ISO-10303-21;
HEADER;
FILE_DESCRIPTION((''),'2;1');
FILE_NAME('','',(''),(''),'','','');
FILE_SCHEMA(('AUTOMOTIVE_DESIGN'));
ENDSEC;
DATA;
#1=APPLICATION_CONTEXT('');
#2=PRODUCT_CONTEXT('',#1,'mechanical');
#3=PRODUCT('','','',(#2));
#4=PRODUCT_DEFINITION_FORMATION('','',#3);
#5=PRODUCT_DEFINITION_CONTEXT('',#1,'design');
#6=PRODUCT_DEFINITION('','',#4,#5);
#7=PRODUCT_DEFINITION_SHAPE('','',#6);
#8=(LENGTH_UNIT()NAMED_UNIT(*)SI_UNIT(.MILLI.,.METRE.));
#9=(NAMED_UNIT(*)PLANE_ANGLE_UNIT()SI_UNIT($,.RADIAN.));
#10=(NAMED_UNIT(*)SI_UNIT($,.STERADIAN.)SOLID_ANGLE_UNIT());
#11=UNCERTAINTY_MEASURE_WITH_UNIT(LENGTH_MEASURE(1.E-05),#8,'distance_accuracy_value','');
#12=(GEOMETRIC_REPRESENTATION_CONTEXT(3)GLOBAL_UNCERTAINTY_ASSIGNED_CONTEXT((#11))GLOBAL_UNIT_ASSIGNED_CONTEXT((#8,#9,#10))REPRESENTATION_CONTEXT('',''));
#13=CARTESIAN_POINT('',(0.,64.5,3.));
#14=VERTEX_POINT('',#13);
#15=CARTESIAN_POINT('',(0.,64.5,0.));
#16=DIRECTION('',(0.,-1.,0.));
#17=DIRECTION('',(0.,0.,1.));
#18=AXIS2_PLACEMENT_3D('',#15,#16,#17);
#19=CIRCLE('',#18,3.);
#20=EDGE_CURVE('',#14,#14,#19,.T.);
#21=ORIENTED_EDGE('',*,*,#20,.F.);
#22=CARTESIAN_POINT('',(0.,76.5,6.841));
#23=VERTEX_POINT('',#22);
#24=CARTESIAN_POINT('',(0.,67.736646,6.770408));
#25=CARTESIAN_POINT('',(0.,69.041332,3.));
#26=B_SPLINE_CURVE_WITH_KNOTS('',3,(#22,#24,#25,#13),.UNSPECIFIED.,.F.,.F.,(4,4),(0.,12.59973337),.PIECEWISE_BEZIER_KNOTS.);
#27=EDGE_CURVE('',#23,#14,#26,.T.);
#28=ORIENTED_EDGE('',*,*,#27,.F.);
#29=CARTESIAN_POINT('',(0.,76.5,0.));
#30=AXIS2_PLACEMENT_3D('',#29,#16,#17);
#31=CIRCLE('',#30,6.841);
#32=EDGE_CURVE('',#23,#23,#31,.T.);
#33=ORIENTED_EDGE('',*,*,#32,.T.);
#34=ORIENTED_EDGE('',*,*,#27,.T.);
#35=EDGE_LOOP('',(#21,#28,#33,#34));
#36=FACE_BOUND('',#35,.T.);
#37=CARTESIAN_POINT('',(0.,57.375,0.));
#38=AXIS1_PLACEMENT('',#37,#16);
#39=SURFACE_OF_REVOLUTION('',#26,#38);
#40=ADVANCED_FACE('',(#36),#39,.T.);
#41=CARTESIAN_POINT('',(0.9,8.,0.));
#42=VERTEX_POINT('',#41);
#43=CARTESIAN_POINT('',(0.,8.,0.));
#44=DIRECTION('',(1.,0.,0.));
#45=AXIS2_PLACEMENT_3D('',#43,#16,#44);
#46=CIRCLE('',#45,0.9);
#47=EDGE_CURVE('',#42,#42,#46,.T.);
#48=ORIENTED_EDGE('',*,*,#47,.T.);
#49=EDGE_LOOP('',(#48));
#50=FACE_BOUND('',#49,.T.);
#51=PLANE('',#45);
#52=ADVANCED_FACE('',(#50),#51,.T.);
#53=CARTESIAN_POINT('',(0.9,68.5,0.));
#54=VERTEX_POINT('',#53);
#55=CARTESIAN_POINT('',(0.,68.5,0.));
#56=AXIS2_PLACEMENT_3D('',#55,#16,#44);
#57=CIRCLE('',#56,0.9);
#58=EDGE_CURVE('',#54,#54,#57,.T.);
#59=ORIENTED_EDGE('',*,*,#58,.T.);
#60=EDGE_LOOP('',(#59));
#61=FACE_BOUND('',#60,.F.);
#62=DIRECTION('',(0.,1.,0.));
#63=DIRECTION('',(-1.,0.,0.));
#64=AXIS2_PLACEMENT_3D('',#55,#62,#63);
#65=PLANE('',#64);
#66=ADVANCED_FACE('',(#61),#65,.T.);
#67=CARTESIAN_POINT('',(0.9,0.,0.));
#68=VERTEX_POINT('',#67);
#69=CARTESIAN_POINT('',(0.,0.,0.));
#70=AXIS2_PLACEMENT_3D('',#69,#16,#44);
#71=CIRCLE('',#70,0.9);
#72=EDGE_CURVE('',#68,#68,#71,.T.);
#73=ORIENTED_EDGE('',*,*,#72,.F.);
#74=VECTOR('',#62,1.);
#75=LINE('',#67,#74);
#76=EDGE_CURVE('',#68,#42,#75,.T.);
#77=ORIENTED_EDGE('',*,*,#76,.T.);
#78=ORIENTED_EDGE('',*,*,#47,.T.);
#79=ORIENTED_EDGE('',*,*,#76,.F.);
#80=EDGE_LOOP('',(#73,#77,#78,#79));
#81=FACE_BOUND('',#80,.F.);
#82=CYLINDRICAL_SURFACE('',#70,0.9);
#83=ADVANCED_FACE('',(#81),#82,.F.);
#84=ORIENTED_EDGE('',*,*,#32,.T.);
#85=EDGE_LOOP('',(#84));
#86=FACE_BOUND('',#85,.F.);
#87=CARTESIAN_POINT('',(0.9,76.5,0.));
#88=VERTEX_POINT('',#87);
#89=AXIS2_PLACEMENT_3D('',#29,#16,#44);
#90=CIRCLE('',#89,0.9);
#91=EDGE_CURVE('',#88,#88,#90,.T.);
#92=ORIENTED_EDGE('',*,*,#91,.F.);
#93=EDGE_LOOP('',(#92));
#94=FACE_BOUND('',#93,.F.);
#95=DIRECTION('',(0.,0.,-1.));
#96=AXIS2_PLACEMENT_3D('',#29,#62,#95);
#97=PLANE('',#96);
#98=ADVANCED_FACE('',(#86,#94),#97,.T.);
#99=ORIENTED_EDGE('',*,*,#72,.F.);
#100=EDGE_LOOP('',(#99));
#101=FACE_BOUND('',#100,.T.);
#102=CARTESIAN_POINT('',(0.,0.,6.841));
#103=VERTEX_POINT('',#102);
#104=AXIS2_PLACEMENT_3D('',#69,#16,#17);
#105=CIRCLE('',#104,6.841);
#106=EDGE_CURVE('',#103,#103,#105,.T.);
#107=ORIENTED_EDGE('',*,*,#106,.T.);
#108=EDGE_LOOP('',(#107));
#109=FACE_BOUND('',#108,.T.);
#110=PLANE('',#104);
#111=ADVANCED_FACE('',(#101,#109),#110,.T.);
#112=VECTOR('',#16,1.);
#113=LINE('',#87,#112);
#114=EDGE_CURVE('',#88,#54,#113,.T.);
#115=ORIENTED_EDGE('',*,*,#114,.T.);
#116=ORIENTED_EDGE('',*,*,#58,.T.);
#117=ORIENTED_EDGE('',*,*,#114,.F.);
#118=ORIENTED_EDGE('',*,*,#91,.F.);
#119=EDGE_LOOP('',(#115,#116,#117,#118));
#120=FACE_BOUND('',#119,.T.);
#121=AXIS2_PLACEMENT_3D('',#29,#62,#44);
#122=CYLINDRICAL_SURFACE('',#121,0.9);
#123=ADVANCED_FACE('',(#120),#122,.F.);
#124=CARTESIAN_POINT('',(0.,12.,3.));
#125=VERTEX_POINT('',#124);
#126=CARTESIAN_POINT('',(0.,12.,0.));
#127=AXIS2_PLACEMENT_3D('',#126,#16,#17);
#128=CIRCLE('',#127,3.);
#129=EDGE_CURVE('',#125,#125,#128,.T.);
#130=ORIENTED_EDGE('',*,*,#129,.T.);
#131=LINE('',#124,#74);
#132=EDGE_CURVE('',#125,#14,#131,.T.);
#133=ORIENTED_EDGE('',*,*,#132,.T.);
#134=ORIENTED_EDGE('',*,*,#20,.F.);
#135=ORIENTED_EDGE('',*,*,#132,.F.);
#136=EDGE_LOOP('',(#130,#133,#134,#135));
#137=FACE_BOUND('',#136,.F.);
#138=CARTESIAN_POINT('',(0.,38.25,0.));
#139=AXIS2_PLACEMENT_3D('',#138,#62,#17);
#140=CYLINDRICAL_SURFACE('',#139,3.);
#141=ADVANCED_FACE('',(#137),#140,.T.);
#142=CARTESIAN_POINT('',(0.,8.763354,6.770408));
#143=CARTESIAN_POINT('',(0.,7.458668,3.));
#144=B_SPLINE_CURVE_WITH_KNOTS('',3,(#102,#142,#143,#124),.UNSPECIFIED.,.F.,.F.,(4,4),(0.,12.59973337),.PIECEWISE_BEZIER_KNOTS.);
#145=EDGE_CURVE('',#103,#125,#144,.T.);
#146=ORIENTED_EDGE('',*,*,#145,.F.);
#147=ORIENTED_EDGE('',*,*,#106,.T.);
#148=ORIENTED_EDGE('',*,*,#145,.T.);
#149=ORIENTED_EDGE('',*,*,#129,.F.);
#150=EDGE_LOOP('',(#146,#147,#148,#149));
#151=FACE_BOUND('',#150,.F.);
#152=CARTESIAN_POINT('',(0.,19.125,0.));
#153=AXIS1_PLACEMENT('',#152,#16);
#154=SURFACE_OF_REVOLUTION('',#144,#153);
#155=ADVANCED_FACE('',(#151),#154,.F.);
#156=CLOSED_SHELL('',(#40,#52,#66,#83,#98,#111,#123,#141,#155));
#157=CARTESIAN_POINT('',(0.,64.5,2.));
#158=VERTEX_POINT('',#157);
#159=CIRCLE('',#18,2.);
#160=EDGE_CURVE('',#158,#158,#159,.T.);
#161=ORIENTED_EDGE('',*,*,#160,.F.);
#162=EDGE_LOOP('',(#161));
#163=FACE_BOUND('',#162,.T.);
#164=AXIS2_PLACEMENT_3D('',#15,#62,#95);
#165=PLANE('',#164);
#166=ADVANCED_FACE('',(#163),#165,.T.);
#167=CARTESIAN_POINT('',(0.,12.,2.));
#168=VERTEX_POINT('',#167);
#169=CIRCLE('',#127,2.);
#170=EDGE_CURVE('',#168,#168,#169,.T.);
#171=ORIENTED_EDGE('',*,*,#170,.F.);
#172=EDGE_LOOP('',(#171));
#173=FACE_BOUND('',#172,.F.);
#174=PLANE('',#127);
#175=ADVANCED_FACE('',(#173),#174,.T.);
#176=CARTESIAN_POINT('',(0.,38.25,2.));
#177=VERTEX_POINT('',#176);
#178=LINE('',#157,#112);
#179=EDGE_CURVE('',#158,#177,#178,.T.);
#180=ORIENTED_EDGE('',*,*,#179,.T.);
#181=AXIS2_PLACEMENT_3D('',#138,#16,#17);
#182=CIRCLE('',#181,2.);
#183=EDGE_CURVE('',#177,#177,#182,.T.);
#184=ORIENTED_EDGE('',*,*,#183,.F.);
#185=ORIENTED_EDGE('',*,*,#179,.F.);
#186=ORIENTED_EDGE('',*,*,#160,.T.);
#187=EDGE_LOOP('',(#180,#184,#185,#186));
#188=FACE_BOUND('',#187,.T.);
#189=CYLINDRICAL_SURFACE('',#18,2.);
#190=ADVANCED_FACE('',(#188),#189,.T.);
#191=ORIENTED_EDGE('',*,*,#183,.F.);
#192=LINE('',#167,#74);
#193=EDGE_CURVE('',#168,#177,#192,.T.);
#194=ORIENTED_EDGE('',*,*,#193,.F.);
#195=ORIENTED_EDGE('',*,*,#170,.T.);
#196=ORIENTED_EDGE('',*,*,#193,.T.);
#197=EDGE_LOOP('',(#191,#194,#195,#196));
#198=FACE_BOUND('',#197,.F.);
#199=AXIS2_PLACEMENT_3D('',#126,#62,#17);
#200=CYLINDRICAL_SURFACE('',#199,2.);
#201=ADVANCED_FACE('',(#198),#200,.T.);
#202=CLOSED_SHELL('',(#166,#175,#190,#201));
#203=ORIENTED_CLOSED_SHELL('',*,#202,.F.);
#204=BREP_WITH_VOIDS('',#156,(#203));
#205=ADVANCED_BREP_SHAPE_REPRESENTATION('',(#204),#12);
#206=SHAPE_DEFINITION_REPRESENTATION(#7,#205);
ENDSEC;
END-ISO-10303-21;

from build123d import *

# Parameters (mm, degrees)
F2_R     = 0.9
F3_DEPTH = 8


with BuildPart() as f1:
    # F0 (on Right) → F1 (revolve)
    with BuildSketch(Plane.YZ):
        with BuildLine():
            Line((0, 5.841069423), (0, 0))
            Line((0, 0), (12, 0))
            Line((12, 0), (12, 2))
            add(Edge.make_bspline(
                [(0, 5.841069423), (0.3497183744, 5.8426503833), (1.3005439266, 5.8382623264), (2.8964802159, 5.7455783673), (4.5870476785, 5.3782777015), (5.9874523646, 4.7970685822), (7.0213600835, 4.1135251272), (7.9242720145, 3.365273981), (8.9405324509, 2.6085376072), (10.1254552113, 2.0890201928), (11.1979079035, 1.9926198646), (11.7889157433, 1.9938020422), (12, 2)],
                knots=[0.0080728178, 0.0080728178, 0.0080728178, 0.0080728178, 1.0595032706, 2.8567052188, 4.7969778976, 6.2186626182, 7.3787538627, 8.5000771421, 9.7368937359, 11.1749138539, 12.3063283312, 12.9431817135, 12.9431817135, 12.9431817135, 12.9431817135], degree=3))
        make_face()
        with BuildLine():
            Line((0, 6.841), (0, 5.841069423))
            add(Edge.make_bspline(
                [(0, 5.841069423), (0.3497183744, 5.8426503833), (1.3005439266, 5.8382623264), (2.8964802159, 5.7455783673), (4.5870476785, 5.3782777015), (5.9874523646, 4.7970685822), (7.0213600835, 4.1135251272), (7.9242720145, 3.365273981), (8.9405324509, 2.6085376072), (10.1254552113, 2.0890201928), (11.1979079035, 1.9926198646), (11.7889157433, 1.9938020422), (12, 2)],
                knots=[0.0080728178, 0.0080728178, 0.0080728178, 0.0080728178, 1.0595032706, 2.8567052188, 4.7969778976, 6.2186626182, 7.3787538627, 8.5000771421, 9.7368937359, 11.1749138539, 12.3063283312, 12.9431817135, 12.9431817135, 12.9431817135, 12.9431817135], degree=3))
            Line((12, 2), (38.25, 2))
            Line((38.25, 2), (38.25, 3))
            Line((38.25, 3), (12, 3))
            add(Edge.make_bspline(
                [(0, 6.841), (8.7633541102, 6.7704077573), (7.4586680881, 3), (12, 3)],
                knots=[0, 0, 0, 0, 12.5997333702, 12.5997333702, 12.5997333702, 12.5997333702], degree=3))
        make_face()
    revolve(axis=Axis((0, 19.125, 0), (0, -1, 0)))

    # F2 (on face) → F3 (cut)
    with BuildSketch(Plane.XZ):
        Circle(F2_R)
    extrude(amount=-F3_DEPTH, mode=Mode.SUBTRACT)

    # F4: F1 across face


with BuildPart() as f1_1:
    add(f1.part)
    add(f1.part.mirror(Plane(origin=(0, 38.25, 0), x_dir=(-1, 0, 0), z_dir=(0, 1, 0))))


solid = f1_1.part
